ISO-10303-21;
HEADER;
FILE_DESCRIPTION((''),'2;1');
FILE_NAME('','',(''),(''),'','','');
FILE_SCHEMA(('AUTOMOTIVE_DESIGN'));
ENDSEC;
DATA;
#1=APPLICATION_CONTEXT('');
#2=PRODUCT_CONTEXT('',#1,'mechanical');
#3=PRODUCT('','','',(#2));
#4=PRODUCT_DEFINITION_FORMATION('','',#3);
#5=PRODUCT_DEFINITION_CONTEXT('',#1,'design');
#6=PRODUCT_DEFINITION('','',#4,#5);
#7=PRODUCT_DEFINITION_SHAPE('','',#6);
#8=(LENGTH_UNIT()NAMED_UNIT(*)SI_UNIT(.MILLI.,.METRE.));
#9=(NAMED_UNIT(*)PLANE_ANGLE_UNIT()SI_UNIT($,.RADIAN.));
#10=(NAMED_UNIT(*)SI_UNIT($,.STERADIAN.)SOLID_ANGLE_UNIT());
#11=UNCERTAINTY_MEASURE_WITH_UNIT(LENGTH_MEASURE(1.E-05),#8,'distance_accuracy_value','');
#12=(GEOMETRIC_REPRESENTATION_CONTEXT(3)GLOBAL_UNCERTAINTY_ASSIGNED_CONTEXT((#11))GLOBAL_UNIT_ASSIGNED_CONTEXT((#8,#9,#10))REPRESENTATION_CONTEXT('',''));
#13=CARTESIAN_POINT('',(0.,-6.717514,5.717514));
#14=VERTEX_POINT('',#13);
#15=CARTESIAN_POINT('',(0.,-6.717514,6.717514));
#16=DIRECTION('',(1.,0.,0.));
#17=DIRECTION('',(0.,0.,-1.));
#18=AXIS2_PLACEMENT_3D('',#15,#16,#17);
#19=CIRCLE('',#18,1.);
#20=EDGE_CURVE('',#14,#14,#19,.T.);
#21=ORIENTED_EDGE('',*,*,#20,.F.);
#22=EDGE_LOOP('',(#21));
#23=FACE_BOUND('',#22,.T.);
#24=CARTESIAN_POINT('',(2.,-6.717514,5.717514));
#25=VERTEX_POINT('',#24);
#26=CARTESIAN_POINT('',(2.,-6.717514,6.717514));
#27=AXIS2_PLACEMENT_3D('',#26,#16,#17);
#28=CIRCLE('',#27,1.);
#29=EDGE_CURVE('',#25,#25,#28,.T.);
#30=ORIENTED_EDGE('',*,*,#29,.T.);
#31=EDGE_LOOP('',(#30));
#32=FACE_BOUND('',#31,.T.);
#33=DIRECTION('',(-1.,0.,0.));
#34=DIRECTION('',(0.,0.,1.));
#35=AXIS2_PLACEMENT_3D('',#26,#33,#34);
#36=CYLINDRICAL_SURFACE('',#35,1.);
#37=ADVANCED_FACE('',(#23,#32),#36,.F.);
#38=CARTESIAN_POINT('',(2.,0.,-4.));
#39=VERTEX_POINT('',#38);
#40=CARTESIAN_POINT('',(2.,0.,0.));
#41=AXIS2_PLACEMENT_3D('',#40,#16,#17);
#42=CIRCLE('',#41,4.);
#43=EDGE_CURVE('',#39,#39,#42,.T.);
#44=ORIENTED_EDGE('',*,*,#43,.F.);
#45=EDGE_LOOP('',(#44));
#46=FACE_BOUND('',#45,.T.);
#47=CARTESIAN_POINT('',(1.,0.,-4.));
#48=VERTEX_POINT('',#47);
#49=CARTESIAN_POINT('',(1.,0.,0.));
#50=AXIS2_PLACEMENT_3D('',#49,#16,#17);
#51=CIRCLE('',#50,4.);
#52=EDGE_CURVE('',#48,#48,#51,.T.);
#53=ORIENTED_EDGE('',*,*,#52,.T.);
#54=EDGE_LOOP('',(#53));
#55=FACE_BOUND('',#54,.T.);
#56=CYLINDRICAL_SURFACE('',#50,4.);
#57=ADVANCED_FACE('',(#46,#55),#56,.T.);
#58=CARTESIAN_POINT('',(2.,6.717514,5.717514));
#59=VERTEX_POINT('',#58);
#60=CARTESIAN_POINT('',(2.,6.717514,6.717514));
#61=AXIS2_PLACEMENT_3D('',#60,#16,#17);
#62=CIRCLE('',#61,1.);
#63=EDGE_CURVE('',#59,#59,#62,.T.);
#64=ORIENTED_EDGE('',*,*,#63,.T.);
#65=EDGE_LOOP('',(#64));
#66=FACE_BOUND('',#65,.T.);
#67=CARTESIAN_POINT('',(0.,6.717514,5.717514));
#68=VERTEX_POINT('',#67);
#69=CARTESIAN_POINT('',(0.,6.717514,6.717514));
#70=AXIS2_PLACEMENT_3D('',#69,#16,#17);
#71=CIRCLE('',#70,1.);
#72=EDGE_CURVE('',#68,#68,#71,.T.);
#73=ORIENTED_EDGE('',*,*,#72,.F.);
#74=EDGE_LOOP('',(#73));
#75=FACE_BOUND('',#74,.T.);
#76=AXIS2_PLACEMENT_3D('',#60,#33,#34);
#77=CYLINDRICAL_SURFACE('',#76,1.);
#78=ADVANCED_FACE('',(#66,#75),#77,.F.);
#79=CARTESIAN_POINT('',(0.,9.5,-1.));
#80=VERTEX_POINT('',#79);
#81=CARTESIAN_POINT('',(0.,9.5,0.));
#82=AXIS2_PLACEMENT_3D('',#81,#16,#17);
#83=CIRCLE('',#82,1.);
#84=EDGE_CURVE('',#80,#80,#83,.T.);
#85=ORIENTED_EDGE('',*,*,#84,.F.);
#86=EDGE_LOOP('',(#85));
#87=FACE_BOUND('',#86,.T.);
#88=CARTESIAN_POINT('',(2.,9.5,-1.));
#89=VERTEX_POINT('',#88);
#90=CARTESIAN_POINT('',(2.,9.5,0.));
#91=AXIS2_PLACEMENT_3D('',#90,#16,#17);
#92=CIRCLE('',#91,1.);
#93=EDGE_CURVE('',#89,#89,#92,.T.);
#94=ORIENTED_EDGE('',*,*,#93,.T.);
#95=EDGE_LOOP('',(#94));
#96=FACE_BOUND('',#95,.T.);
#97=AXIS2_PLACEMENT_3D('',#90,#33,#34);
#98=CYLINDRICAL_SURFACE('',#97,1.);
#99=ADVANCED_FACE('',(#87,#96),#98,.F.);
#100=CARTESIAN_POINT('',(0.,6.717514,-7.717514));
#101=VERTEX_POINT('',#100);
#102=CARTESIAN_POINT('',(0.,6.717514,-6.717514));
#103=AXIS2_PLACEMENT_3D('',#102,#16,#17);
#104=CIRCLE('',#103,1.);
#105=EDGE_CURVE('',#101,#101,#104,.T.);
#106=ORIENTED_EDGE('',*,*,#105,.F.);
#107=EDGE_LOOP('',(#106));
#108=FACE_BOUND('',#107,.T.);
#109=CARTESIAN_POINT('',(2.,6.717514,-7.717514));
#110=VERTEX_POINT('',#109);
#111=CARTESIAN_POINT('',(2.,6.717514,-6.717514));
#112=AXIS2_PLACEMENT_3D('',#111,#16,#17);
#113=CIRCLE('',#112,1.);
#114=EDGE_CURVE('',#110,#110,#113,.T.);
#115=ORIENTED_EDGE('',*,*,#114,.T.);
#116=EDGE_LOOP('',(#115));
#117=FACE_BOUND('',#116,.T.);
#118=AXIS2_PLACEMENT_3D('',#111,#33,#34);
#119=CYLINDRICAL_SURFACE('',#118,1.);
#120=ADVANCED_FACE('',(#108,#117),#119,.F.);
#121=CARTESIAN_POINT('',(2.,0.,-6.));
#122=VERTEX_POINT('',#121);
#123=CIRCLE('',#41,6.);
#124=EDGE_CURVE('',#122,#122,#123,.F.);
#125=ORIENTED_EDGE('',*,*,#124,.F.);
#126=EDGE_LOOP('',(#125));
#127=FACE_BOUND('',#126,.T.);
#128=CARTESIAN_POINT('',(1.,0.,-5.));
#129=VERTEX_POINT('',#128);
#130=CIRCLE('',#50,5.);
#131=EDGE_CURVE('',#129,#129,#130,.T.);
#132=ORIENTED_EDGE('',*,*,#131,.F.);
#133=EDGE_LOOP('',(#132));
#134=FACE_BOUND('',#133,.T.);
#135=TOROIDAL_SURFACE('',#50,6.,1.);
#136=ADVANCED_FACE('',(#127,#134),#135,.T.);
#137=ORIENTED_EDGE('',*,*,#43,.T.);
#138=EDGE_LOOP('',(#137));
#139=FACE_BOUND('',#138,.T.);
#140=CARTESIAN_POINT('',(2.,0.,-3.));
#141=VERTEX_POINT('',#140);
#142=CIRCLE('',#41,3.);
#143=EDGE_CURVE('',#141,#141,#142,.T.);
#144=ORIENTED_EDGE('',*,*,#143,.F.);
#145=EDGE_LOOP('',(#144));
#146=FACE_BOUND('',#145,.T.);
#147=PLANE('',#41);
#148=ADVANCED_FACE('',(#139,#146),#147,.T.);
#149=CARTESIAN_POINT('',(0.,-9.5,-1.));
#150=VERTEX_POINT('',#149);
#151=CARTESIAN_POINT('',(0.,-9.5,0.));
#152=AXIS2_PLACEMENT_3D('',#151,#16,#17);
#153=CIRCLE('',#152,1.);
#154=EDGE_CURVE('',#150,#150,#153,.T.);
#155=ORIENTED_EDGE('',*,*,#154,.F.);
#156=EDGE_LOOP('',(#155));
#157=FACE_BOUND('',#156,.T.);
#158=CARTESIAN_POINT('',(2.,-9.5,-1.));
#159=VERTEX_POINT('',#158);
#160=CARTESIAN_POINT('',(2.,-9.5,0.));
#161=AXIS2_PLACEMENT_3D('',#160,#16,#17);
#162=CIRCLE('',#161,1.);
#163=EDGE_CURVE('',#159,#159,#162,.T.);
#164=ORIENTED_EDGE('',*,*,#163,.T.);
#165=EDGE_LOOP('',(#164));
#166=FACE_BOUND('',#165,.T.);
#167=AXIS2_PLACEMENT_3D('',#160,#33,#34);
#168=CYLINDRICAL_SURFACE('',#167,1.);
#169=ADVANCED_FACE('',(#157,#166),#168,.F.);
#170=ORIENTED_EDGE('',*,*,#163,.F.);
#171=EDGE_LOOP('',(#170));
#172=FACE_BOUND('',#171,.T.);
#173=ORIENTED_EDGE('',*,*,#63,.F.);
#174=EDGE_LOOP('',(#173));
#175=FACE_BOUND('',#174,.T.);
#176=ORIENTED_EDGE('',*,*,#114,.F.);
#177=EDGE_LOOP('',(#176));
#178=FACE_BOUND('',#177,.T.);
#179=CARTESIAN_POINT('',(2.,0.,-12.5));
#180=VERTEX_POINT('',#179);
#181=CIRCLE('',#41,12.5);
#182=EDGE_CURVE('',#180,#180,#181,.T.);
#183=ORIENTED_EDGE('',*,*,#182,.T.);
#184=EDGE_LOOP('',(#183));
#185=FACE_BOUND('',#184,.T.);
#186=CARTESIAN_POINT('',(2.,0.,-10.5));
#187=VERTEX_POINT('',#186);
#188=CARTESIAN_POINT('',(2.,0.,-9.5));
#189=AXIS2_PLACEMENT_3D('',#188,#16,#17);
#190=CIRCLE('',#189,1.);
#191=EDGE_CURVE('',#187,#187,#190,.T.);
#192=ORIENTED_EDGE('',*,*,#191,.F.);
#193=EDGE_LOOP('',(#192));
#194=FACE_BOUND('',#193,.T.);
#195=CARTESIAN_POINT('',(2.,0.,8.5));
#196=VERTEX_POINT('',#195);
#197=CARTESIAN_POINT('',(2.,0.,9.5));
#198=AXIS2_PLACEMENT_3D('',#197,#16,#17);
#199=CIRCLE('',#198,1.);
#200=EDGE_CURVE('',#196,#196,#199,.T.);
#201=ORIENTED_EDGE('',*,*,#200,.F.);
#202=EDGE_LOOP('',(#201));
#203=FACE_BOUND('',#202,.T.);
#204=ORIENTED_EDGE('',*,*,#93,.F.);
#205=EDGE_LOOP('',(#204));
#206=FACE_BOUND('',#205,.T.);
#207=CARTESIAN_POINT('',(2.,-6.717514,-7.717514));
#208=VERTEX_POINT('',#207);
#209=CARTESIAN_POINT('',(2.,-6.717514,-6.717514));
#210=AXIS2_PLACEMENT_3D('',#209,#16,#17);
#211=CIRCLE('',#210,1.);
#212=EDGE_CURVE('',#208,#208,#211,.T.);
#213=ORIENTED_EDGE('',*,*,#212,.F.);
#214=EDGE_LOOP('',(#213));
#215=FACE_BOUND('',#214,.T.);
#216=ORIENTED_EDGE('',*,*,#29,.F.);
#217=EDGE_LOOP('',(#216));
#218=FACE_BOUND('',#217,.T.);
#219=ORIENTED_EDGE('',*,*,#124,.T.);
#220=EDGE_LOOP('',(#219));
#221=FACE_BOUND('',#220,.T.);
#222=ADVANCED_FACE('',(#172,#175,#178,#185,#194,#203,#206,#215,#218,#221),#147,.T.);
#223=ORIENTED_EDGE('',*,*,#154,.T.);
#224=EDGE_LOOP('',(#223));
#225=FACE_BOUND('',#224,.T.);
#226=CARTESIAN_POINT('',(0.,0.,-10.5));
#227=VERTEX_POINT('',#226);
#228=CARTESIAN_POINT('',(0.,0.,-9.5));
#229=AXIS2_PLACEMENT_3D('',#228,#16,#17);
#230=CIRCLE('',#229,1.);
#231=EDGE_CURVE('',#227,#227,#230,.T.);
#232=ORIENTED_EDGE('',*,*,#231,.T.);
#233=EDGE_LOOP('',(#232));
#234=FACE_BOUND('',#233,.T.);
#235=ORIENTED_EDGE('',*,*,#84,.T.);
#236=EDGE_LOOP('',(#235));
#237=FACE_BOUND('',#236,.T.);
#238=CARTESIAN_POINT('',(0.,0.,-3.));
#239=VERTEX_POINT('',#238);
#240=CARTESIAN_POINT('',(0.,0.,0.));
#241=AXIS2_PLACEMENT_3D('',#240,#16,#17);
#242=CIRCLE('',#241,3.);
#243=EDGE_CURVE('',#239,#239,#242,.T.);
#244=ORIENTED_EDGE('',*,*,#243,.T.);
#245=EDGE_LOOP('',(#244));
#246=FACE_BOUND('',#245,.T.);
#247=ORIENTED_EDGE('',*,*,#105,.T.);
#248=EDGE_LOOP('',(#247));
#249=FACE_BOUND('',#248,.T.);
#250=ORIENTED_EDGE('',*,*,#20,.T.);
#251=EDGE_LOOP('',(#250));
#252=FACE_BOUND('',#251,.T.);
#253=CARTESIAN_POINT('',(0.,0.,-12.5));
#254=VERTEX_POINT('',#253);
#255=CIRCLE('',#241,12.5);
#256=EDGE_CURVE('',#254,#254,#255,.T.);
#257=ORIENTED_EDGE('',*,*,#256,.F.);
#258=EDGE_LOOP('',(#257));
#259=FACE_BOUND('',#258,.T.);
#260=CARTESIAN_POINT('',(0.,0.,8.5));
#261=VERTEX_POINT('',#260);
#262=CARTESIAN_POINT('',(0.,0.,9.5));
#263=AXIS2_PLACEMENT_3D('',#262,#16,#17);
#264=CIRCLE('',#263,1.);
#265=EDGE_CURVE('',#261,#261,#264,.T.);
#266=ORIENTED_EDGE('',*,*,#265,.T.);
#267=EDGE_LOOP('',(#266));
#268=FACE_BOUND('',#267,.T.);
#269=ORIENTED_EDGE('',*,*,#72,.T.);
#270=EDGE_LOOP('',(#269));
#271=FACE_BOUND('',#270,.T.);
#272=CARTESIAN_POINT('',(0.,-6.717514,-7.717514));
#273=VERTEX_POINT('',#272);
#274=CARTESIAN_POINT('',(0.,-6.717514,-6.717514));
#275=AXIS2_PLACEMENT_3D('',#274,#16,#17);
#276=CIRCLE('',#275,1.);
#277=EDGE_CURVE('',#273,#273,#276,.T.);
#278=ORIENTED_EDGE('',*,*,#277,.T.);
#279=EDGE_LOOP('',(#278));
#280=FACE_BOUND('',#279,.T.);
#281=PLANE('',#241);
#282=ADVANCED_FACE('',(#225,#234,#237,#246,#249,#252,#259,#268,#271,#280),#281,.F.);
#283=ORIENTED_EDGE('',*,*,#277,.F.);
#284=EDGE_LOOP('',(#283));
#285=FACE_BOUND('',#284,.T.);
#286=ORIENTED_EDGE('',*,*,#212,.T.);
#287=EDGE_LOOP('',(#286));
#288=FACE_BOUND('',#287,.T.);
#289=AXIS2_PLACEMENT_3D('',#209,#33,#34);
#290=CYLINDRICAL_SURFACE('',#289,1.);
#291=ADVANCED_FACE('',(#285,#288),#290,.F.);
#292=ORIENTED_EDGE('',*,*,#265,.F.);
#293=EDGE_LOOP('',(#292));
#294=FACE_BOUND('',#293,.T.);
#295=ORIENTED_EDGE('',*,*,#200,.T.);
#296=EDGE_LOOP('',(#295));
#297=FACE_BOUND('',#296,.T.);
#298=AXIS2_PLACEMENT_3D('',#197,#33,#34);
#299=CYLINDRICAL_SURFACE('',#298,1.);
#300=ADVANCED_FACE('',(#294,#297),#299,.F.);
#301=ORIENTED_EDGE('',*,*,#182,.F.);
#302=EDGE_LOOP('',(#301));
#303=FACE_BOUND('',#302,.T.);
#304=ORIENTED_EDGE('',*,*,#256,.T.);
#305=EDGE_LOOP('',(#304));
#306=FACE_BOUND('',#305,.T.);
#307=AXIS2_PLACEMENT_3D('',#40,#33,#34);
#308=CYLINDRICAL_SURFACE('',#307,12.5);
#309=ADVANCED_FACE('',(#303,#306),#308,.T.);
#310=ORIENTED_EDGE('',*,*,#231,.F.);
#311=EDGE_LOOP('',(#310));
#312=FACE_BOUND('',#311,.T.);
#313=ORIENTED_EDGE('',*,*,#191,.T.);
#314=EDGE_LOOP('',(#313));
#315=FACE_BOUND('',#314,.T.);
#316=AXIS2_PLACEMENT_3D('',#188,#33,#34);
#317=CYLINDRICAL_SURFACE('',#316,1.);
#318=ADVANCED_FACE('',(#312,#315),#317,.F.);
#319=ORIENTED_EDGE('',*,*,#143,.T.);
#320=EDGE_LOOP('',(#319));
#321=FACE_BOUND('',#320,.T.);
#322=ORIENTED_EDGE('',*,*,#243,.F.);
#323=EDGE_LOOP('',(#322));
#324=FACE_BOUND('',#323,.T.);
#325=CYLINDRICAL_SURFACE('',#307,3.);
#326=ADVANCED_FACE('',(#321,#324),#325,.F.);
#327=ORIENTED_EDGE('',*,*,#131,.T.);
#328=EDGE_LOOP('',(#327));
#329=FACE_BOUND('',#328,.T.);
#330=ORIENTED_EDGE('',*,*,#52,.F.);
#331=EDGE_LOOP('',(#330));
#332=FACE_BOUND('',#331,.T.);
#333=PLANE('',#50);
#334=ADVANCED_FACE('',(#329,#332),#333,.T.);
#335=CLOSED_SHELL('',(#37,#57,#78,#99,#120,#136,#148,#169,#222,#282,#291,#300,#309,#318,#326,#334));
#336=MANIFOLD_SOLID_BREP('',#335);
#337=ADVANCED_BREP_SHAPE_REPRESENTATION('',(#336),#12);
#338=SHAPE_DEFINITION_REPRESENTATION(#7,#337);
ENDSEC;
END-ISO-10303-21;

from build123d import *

# Parameters (mm, degrees)
SKETCH1_R           = 12.5
SKETCH1_R_2         = 3
SKETCH1_R_3         = 1
BOSS_EXTRUDE1_DEPTH = 2
SKETCH2_R           = 5
SKETCH2_R_2         = 4
CUT_EXTRUDE1_DEPTH  = 1
FILLET1_R           = 1


with BuildPart() as part:
    # Sketch1 → Boss-Extrude1 (new body)
    with BuildSketch(Plane(origin=(0, 0, 0), x_dir=(0, 0, -1), z_dir=(1, 0, 0))):
        Circle(SKETCH1_R)
        Circle(SKETCH1_R_2, mode=Mode.SUBTRACT)
        with Locations((9.5, 0)):
            Circle(SKETCH1_R_3, mode=Mode.SUBTRACT)
        with Locations((6.717514421, -6.717514421)):
            Circle(SKETCH1_R_3, mode=Mode.SUBTRACT)
        with Locations((0, -9.5)):
            Circle(SKETCH1_R_3, mode=Mode.SUBTRACT)
        with Locations((-6.717514421, -6.717514421)):
            Circle(SKETCH1_R_3, mode=Mode.SUBTRACT)
        with Locations((-9.5, 0)):
            Circle(SKETCH1_R_3, mode=Mode.SUBTRACT)
        with Locations((-6.717514421, 6.717514421)):
            Circle(SKETCH1_R_3, mode=Mode.SUBTRACT)
        with Locations((0, 9.5)):
            Circle(SKETCH1_R_3, mode=Mode.SUBTRACT)
        with Locations((6.717514421, 6.717514421)):
            Circle(SKETCH1_R_3, mode=Mode.SUBTRACT)
    extrude(amount=BOSS_EXTRUDE1_DEPTH)

    # Sketch2 → Cut-Extrude1 (cut)
    with BuildSketch(Plane(origin=(2, 0, 0), x_dir=(0, 0, -1), z_dir=(1, 0, 0))):
        Circle(SKETCH2_R)
        Circle(SKETCH2_R_2, mode=Mode.SUBTRACT)
    extrude(amount=-CUT_EXTRUDE1_DEPTH, mode=Mode.SUBTRACT)

    # Fillet1
    fillet1_edges = [part.edges().sort_by_distance(p)[0] for p in [
        (2, 0, 5),
    ]]
    fillet(fillet1_edges, radius=FILLET1_R - 0.0001)  # a hair under: the kernel refuses the full size


solid = part.part
